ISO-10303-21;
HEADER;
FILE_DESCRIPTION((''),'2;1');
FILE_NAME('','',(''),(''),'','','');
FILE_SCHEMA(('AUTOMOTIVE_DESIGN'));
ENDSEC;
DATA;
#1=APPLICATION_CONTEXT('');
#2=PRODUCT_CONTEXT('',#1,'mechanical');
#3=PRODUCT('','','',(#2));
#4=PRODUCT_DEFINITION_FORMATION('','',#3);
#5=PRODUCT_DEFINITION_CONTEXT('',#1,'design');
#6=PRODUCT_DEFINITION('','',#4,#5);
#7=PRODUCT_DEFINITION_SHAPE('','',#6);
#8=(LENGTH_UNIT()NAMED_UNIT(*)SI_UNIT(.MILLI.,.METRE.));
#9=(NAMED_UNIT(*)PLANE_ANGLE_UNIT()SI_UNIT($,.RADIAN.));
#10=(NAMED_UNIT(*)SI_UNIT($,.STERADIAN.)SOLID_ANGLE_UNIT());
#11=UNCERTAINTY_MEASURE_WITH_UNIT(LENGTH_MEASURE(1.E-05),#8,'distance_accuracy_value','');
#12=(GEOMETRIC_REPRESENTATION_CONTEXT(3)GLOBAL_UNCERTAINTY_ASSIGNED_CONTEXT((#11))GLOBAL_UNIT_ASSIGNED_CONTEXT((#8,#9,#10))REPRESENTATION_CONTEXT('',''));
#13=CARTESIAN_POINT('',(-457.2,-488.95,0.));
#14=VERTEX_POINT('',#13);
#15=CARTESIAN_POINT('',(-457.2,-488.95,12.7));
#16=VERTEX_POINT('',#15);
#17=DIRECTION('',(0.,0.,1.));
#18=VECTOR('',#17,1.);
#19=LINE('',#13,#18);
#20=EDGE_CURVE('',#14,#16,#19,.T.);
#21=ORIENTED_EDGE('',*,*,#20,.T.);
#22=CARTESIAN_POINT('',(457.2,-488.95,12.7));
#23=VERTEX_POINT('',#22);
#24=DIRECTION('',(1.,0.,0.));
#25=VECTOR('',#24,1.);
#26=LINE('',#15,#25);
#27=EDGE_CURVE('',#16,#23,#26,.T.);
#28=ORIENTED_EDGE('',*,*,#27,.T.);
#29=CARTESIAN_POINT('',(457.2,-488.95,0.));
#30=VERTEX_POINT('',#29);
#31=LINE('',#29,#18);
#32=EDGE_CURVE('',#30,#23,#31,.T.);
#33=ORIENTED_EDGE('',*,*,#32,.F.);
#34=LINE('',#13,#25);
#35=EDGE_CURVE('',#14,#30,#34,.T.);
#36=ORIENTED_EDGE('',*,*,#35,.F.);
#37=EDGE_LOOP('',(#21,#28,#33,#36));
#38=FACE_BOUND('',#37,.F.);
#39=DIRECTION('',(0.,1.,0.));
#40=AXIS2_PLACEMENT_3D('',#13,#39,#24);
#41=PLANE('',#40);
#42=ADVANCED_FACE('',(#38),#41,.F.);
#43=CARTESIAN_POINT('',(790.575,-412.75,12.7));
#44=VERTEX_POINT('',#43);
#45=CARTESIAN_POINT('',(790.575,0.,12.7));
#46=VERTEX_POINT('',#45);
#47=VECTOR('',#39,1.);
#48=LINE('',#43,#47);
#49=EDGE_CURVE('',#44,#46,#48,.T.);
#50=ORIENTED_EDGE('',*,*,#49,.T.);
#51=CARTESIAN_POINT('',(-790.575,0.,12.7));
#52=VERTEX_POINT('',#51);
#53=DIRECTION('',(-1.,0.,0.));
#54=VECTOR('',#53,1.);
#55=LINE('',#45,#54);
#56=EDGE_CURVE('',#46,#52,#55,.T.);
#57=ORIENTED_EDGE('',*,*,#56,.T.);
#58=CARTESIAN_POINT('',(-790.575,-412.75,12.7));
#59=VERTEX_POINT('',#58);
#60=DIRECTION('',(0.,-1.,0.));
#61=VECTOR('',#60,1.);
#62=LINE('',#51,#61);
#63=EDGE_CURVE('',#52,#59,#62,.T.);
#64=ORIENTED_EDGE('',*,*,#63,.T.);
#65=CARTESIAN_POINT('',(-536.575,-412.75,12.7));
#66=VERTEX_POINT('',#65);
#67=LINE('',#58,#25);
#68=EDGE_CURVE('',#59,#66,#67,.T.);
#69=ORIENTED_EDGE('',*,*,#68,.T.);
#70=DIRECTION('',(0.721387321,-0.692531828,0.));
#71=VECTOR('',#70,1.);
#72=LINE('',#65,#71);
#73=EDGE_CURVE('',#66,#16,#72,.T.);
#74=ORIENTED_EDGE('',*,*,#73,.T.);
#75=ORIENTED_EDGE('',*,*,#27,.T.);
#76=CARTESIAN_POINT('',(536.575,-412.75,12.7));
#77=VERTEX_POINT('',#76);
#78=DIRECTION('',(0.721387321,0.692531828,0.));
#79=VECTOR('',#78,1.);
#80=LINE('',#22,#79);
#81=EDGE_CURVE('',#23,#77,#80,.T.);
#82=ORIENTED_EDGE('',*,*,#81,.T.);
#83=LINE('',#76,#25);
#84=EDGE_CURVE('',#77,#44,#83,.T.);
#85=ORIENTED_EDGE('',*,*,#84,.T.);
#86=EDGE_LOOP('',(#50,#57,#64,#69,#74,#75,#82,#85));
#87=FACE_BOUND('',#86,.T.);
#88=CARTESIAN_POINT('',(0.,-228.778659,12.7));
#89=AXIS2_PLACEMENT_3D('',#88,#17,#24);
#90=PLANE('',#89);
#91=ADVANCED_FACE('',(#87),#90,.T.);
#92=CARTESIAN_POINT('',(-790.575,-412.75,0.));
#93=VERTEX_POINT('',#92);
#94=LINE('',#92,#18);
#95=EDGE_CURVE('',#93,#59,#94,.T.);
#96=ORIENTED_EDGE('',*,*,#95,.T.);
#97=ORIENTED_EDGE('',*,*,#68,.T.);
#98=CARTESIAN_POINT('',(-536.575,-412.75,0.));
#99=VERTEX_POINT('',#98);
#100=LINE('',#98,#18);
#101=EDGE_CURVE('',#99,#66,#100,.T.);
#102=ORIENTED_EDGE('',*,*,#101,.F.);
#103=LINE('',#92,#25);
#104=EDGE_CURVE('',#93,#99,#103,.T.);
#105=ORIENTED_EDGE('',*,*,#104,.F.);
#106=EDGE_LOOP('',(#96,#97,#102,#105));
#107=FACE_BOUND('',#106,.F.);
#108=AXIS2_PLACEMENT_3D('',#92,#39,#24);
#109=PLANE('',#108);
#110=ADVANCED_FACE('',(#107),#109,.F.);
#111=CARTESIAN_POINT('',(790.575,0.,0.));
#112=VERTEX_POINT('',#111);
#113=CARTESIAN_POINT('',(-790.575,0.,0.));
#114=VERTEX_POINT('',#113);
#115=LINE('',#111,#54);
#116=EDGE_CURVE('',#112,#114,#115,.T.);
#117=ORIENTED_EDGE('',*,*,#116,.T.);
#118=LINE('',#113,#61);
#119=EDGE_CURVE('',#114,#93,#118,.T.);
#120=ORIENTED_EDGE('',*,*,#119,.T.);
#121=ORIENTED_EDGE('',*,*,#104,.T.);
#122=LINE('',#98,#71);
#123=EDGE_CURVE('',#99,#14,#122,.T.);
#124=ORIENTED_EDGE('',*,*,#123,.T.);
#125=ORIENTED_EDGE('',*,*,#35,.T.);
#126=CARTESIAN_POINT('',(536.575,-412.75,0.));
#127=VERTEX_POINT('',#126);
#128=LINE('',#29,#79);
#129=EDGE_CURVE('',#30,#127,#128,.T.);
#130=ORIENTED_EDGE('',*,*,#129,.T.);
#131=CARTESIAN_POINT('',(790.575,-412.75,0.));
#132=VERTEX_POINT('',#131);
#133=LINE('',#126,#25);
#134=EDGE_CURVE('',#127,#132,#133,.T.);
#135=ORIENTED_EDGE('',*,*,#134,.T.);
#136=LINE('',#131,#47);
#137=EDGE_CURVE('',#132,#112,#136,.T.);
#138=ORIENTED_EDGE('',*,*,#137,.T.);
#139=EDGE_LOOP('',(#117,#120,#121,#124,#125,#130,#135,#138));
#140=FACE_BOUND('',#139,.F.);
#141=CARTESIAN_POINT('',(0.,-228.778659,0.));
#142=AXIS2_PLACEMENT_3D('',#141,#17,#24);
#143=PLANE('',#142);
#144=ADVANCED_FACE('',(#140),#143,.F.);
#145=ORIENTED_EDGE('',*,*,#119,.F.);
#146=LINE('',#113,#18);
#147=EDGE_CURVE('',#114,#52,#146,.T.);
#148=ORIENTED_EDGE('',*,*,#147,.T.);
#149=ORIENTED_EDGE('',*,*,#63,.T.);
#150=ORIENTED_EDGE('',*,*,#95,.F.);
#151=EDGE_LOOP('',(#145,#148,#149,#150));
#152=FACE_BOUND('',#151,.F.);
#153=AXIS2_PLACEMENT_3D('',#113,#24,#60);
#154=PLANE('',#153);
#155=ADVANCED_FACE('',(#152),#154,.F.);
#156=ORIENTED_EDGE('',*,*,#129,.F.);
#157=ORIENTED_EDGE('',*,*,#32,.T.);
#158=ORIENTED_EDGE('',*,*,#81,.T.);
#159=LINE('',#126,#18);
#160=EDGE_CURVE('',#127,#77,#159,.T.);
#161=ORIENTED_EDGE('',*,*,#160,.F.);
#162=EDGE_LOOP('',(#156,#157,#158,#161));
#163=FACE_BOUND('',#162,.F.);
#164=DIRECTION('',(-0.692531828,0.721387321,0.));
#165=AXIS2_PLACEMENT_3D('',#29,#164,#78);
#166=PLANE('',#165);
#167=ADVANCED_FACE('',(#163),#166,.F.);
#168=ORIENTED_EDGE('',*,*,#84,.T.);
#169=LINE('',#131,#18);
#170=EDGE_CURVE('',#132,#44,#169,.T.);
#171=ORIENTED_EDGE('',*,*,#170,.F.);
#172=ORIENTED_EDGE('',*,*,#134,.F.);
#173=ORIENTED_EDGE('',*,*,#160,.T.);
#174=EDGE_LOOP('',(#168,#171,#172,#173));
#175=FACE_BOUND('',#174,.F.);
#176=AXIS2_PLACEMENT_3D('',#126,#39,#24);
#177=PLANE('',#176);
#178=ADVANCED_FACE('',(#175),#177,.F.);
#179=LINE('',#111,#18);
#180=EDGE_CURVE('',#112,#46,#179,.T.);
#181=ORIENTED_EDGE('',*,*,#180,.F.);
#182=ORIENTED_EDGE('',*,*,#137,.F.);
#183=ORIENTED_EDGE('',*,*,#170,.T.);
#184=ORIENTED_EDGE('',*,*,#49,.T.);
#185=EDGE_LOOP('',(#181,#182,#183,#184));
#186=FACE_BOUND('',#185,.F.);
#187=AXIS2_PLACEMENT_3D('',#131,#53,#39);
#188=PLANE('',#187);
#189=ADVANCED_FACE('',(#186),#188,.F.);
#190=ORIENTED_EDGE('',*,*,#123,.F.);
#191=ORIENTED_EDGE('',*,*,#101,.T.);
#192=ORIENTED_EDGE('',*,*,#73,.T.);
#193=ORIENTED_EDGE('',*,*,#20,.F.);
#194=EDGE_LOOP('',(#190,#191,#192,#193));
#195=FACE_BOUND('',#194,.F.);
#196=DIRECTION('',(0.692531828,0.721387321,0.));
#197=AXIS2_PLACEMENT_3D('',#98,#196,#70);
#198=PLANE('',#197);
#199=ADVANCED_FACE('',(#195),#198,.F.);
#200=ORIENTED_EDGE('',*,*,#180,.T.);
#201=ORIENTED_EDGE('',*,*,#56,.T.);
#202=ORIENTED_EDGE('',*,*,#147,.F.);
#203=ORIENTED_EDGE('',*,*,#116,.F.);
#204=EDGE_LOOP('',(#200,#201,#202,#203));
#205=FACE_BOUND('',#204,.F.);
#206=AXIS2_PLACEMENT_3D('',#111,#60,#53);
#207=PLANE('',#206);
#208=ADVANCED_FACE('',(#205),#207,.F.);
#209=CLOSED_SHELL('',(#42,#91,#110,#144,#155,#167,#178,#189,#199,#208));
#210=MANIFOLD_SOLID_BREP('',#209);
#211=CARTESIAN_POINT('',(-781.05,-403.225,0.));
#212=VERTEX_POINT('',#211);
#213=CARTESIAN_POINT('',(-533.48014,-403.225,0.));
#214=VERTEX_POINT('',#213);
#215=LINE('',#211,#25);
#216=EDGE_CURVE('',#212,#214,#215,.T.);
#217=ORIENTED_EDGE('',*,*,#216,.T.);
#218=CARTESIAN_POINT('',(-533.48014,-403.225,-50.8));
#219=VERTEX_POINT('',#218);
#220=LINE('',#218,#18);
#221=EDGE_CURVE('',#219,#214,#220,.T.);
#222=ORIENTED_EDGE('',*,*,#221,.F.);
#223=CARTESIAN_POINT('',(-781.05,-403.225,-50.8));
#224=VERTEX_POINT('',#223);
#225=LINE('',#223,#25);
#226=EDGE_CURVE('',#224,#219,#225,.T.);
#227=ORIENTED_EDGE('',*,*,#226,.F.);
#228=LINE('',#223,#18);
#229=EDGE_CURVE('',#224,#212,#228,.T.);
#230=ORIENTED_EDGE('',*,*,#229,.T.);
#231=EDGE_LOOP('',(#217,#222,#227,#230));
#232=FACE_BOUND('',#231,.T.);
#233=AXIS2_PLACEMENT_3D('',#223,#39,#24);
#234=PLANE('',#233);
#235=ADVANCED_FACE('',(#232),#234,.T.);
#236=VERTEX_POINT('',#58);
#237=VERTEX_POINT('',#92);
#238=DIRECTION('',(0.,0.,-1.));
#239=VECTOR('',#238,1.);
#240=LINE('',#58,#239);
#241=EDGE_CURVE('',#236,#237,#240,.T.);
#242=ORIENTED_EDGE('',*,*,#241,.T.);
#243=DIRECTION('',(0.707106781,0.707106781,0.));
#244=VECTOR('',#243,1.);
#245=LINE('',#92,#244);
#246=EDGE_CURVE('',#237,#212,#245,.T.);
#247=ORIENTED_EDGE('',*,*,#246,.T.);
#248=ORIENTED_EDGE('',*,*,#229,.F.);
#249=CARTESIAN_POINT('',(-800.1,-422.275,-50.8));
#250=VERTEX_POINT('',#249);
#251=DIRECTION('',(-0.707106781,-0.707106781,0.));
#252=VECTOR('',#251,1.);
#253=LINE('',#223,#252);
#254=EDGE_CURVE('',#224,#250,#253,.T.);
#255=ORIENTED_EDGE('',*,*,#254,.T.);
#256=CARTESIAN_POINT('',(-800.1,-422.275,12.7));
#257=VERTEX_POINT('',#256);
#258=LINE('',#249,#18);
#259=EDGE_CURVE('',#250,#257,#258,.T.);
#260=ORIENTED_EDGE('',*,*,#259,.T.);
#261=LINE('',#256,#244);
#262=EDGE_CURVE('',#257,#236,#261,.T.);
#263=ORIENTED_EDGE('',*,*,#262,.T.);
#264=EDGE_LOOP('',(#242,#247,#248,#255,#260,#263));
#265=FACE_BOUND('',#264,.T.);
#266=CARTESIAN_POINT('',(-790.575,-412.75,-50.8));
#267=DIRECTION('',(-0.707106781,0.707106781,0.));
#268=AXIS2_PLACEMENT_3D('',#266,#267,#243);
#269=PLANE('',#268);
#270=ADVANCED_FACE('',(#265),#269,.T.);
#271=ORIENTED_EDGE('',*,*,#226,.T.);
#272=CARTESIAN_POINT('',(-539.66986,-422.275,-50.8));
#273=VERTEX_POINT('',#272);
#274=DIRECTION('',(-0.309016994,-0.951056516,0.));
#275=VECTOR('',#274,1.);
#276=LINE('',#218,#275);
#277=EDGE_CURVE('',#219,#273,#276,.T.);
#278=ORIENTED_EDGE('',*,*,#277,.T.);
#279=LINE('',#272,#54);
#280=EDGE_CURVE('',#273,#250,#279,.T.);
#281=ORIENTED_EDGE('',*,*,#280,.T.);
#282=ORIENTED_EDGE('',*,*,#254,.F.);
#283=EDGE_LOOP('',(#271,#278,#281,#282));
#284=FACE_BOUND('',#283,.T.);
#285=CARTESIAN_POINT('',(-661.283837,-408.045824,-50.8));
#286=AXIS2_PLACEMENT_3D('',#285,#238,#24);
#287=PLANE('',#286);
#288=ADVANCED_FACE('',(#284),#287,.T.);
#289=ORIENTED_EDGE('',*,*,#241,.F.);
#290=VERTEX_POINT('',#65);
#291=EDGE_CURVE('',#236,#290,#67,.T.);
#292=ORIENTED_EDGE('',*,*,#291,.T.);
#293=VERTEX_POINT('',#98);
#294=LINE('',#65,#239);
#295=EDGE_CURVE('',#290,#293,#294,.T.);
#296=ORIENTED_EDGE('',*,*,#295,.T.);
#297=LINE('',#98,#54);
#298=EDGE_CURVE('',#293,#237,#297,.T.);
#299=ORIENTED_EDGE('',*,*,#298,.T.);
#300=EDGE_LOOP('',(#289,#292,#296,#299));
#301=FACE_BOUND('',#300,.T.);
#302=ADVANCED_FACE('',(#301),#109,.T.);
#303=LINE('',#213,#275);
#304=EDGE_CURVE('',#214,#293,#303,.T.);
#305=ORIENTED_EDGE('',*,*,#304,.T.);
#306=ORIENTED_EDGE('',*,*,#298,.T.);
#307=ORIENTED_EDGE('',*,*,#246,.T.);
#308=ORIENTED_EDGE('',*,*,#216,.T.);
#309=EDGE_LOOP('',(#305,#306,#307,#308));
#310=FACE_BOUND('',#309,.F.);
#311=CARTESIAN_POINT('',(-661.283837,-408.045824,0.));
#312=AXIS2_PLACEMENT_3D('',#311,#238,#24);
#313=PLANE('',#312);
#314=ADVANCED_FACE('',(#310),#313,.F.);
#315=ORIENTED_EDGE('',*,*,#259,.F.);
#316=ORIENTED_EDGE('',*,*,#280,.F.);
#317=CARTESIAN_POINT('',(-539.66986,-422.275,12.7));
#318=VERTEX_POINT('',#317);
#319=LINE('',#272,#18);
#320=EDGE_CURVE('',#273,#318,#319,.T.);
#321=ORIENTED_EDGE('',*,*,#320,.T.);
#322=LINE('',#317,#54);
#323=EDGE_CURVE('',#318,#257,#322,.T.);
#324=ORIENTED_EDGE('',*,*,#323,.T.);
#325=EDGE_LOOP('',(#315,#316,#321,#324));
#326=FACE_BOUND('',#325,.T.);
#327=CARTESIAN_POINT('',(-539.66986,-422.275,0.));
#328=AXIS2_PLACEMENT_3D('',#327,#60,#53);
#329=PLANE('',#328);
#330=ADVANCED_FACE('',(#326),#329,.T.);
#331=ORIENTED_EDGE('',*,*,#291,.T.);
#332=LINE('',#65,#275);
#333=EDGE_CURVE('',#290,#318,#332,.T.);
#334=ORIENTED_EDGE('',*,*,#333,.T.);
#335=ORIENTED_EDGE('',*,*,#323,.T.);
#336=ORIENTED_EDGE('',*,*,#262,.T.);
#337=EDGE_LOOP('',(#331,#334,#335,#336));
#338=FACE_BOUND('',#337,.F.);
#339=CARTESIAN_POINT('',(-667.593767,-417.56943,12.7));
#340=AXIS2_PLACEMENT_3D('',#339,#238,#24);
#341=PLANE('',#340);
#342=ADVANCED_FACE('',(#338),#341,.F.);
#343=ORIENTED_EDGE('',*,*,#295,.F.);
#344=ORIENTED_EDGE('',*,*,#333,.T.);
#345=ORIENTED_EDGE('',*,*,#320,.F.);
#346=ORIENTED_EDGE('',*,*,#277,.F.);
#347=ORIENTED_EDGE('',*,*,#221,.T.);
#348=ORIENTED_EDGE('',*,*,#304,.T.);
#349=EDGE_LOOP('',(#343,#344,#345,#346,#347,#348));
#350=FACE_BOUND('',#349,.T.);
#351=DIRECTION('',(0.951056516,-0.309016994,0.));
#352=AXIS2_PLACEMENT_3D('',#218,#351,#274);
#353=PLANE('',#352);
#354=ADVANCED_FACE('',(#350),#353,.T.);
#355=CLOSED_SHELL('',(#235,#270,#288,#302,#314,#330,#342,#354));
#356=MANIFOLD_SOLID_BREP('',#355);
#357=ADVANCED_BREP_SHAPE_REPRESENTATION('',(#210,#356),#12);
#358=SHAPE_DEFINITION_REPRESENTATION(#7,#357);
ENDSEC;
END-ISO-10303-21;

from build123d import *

# Parameters (mm, degrees)
F1_DEPTH      = 12.7
F3_DEPTH      = 50.8
F3_DEPTH_BACK = 12.7
F5_DEPTH      = 50.8


with BuildPart() as f1:
    # F0 (on Top) → F1 (new body)
    with BuildSketch(Plane.XY):
        Polygon((790.575, 0), (-790.575, 0), (-790.575, -412.75), (-536.575, -412.75), (-457.2, -488.95), (457.2, -488.95), (536.575, -412.75), (790.575, -412.75), align=None)
    extrude(amount=F1_DEPTH)


with BuildPart() as f3:
    # F2 (on face) → F3 (new body, two sides)
    with BuildSketch(Plane(origin=(0, 0, 0), x_dir=(1, 0, 0), z_dir=(0, 0, -1))) as f3_sk:
        Polygon((-800.1, 422.275), (-790.575, 412.75), (-536.575, 412.75), (-539.6698601066, 422.275), align=None)
    extrude(amount=F3_DEPTH)
    extrude(f3_sk.sketch, amount=-F3_DEPTH_BACK)

    # F4 (on face) → F5 (join)
    with BuildSketch(Plane(origin=(0, 0, -50.8), x_dir=(1, 0, 0), z_dir=(0, 0, -1))):
        Polygon((-536.575, 412.75), (-790.575, 412.75), (-781.05, 403.225), (-533.4801398934, 403.225), align=None)
    extrude(amount=-F5_DEPTH)


solid = Compound([f1.part, f3.part])
